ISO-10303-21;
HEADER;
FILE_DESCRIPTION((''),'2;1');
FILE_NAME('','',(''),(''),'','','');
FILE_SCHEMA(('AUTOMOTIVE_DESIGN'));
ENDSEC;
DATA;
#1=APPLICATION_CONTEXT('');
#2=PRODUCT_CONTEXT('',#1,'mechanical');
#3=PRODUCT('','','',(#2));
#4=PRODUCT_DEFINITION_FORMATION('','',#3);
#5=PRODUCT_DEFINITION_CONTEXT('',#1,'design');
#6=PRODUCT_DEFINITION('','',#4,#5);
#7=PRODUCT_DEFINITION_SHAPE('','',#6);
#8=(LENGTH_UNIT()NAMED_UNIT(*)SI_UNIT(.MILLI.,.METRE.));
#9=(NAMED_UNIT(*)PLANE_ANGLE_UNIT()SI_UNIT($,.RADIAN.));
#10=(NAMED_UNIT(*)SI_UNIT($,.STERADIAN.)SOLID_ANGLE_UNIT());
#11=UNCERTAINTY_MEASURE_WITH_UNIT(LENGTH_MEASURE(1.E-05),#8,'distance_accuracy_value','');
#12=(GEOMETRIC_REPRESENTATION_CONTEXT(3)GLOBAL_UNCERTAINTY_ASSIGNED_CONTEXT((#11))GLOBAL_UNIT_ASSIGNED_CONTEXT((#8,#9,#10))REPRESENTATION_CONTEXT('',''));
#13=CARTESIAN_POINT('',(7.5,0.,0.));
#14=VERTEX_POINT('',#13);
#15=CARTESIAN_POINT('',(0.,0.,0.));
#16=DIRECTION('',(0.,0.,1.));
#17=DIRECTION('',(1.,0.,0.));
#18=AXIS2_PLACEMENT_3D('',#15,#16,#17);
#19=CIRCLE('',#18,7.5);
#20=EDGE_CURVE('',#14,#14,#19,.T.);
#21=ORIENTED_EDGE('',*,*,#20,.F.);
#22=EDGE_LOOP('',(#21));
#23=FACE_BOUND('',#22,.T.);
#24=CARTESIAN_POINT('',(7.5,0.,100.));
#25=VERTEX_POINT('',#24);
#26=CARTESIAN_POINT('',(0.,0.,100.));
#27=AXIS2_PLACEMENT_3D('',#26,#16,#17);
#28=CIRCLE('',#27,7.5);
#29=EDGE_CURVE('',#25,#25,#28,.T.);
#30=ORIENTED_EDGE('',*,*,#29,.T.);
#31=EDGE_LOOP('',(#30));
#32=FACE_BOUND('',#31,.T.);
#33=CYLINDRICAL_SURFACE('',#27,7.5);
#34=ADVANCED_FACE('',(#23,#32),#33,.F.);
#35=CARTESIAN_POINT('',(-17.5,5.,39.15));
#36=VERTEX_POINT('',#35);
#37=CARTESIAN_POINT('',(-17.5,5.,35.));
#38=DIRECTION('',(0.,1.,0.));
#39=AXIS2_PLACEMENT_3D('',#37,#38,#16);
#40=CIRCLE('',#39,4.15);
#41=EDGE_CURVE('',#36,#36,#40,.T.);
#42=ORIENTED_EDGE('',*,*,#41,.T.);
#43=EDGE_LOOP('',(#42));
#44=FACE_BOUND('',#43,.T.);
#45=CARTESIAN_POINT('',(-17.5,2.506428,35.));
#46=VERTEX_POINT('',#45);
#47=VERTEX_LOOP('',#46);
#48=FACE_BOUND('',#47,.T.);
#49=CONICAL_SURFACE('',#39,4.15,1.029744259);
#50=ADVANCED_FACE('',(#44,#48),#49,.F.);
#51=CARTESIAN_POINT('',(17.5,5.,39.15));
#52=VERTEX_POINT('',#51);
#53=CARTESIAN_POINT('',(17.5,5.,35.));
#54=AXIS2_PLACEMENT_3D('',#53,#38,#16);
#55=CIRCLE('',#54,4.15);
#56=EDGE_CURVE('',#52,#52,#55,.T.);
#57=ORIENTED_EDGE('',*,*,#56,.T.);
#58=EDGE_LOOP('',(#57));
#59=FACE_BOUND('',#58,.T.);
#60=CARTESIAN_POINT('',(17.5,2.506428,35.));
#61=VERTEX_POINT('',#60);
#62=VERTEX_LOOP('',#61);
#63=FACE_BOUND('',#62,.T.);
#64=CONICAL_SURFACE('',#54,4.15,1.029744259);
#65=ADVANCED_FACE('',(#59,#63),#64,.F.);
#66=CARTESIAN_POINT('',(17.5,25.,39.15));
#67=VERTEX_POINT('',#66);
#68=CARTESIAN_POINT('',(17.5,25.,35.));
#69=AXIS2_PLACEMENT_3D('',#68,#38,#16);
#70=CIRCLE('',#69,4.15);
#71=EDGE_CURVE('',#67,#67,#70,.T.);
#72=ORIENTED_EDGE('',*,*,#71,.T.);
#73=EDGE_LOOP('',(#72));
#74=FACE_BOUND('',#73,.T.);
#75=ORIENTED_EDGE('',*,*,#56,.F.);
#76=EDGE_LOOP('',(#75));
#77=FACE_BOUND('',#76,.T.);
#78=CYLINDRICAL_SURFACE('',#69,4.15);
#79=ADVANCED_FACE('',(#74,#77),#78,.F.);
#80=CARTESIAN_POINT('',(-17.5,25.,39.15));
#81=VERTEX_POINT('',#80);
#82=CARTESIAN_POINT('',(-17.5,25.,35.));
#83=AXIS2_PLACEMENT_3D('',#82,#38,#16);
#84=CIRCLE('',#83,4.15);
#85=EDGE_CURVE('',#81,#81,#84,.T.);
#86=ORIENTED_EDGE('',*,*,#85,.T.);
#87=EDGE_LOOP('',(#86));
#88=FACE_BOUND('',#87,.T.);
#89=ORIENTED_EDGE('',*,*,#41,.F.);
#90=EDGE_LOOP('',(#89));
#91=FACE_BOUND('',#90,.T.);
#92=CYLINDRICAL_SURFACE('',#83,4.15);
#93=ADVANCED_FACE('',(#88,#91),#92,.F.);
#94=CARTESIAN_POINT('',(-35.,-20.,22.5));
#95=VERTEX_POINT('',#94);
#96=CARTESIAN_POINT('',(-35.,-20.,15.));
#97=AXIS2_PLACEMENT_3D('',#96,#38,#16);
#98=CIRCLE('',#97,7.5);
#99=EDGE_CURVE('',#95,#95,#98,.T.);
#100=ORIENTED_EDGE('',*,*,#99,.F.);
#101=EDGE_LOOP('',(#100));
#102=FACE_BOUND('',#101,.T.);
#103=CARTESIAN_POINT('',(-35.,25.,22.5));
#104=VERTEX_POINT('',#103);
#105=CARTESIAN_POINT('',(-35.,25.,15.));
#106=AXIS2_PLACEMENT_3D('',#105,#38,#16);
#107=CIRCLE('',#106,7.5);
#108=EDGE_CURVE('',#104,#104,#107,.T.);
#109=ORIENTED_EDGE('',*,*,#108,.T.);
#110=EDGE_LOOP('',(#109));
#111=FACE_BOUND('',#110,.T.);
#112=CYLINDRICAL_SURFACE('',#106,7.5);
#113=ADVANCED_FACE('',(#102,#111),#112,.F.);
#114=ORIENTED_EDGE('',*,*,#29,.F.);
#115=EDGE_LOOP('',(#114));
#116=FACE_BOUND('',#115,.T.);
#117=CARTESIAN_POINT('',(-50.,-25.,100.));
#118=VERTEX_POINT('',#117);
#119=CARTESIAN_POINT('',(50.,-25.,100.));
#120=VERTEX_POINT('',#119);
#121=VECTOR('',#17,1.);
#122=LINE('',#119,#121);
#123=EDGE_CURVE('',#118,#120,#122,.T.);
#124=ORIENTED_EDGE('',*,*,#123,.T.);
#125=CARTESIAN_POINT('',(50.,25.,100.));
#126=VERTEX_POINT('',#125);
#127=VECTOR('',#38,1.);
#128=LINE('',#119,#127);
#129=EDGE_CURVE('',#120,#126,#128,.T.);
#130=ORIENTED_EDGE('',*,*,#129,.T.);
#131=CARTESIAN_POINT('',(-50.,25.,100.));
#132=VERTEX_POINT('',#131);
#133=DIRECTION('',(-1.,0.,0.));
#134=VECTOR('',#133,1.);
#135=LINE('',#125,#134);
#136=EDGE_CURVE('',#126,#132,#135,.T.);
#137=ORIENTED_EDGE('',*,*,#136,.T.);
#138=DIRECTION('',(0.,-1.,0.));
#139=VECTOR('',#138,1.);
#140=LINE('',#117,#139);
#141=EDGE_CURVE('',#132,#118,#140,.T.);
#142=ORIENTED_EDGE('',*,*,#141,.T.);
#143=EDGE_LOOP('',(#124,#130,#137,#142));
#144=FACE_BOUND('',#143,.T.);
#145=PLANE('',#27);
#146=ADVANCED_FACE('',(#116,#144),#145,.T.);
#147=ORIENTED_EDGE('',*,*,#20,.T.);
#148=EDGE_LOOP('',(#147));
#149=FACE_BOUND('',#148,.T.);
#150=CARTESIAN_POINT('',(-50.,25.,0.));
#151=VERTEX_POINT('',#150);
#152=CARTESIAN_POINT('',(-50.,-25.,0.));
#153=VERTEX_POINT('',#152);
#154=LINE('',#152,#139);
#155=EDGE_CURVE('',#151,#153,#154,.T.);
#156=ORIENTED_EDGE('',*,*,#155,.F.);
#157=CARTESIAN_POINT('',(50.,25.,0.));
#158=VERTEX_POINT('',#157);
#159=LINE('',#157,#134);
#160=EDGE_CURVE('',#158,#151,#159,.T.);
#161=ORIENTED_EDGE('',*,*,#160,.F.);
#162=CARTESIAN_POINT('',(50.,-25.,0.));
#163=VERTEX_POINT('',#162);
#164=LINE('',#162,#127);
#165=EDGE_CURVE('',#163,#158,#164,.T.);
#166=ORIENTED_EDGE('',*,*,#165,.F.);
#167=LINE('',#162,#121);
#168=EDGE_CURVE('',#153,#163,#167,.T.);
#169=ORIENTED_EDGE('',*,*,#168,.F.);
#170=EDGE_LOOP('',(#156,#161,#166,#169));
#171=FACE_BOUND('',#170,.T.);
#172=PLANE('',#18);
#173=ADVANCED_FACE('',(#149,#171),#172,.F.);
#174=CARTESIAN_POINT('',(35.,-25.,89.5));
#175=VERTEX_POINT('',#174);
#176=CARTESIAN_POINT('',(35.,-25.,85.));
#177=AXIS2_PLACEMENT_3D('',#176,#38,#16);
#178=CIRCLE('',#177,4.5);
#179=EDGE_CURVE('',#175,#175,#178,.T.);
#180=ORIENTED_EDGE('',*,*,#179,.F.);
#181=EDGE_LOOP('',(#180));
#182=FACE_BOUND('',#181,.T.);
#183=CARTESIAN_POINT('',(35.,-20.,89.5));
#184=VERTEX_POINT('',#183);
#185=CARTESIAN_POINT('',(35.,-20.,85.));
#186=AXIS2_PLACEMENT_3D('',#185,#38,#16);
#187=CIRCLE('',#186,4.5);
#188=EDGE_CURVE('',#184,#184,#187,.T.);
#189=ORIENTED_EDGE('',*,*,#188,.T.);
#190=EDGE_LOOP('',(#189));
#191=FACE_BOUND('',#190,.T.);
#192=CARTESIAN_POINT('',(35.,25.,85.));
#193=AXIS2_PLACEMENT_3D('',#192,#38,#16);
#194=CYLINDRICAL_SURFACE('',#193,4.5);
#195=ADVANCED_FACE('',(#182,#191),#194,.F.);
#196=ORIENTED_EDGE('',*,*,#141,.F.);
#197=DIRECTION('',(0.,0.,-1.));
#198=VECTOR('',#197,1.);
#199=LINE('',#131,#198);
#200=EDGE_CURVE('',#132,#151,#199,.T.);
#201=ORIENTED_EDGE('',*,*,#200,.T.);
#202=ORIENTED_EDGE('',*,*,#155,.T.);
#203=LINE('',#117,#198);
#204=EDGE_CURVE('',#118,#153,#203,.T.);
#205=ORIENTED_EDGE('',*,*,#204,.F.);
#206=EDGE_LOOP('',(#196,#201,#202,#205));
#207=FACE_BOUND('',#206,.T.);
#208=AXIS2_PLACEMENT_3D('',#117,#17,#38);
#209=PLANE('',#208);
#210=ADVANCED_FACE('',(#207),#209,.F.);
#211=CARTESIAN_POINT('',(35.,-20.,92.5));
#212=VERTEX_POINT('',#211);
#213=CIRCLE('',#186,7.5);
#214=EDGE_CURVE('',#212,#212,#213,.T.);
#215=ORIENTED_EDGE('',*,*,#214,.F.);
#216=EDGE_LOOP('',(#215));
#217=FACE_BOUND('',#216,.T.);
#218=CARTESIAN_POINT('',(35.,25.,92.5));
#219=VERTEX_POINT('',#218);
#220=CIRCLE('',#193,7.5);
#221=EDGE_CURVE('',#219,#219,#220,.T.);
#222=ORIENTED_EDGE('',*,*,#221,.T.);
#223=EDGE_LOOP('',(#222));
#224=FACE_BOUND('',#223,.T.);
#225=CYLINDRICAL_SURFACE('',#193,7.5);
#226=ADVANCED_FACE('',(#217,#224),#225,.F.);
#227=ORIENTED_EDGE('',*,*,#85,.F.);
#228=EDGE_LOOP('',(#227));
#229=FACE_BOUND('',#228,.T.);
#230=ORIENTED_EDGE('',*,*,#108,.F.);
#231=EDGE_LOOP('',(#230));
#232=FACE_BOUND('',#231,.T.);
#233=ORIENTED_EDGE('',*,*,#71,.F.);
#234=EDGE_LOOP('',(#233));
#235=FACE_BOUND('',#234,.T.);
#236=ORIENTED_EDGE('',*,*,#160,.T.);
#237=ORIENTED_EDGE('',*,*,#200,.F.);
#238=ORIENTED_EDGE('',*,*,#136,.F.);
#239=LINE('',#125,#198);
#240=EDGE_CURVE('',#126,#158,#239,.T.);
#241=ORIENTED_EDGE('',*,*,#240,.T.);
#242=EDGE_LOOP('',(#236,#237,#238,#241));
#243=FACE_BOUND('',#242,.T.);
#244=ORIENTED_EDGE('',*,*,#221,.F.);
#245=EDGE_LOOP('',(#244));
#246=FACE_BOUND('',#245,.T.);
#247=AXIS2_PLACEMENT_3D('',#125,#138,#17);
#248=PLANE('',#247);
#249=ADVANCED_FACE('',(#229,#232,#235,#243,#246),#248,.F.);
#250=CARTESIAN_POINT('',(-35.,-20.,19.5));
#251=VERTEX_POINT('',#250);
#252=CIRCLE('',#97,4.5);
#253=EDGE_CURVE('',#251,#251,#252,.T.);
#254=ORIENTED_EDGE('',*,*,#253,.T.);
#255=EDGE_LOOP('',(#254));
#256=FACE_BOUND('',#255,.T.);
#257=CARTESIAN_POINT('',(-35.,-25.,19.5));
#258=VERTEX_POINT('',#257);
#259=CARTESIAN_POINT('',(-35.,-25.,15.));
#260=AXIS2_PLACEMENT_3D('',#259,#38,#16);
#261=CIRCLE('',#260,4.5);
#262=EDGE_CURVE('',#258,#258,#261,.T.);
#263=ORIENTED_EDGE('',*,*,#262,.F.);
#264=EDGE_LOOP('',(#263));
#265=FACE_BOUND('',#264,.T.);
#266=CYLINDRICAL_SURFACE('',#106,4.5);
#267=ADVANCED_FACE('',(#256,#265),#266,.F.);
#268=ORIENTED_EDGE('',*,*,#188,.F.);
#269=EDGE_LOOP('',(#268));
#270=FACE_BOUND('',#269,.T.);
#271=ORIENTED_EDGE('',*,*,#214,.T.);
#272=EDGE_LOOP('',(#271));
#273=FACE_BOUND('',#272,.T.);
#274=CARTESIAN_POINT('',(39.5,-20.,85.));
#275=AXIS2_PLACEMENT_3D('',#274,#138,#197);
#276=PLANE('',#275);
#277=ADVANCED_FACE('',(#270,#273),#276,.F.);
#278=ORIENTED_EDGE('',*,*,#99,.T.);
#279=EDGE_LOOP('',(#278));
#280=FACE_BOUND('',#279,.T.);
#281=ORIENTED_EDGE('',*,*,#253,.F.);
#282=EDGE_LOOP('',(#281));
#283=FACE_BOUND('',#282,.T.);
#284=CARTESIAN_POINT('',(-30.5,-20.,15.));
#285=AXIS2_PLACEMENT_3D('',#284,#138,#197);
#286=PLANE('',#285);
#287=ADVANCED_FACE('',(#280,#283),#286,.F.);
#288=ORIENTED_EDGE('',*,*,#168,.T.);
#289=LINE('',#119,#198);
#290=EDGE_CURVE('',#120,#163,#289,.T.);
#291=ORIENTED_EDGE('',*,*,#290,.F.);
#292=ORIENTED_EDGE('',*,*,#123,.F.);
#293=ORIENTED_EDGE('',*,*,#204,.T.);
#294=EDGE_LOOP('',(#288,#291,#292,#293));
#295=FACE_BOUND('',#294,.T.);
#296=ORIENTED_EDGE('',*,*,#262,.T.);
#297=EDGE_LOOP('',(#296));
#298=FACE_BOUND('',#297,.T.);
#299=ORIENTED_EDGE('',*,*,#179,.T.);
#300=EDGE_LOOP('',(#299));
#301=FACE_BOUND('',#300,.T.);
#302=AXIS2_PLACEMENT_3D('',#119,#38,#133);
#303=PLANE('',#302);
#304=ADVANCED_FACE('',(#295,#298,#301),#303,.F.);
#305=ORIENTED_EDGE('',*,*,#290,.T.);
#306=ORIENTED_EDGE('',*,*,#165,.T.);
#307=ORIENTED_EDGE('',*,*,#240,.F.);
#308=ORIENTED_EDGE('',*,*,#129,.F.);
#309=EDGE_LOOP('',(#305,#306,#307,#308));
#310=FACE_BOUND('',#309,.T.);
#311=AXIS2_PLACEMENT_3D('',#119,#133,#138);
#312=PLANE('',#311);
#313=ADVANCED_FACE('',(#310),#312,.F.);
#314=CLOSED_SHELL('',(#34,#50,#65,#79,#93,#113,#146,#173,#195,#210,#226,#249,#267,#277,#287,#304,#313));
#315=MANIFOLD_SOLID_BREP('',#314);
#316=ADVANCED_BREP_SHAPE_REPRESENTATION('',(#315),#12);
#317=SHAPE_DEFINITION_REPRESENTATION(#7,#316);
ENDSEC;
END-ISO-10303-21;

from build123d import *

# Parameters (mm, degrees)
SKIZZE1_W                                           = 100
SKIZZE1_H                                           = 50
AUFSATZ_LINEAR_AUSTRAGEN1_DEPTH                     = 100
STIRNSENKUNG_F_R_M8_SENKSCHRAUBE_KOPF_B_D           = 9
STIRNSENKUNG_F_R_M8_SENKSCHRAUBE_KOPF_B_CBORE_D     = 15
STIRNSENKUNG_F_R_M8_SENKSCHRAUBE_KOPF_B_CBORE_DEPTH = 45
STIRNSENKUNG_F_R_M8_SENKSCHRAUBE_KO_2_D             = 9
STIRNSENKUNG_F_R_M8_SENKSCHRAUBE_KO_2_CBORE_D       = 15
STIRNSENKUNG_F_R_M8_SENKSCHRAUBE_KO_2_CBORE_DEPTH   = 116


# Read off the part's stored shape, not the designer's step: Kernloch für M8 Helicoil1
with BuildPart() as part:
    # Skizze1 → Aufsatz-Linear austragen1 (new body)
    with BuildSketch(Plane.XY):
        Rectangle(SKIZZE1_W, SKIZZE1_H)
    extrude(amount=AUFSATZ_LINEAR_AUSTRAGEN1_DEPTH)

    # Stirnsenkung f_r M8 Senkschraube _Kopf B (through all)
    with Locations(Plane(origin=(0, 25, 0), x_dir=(1, 0, 0), z_dir=(0, 1, 0))):
        with Locations((35, -85), (-35, -15)):
            CounterBoreHole(STIRNSENKUNG_F_R_M8_SENKSCHRAUBE_KOPF_B_D / 2, STIRNSENKUNG_F_R_M8_SENKSCHRAUBE_KOPF_B_CBORE_D / 2, STIRNSENKUNG_F_R_M8_SENKSCHRAUBE_KOPF_B_CBORE_DEPTH)

    # Stirnsenkung f_r M8 Senkschraube _Ko 2 (through all)
    with Locations(Plane.XY.offset(100)):
        with Locations((0, 0)):
            CounterBoreHole(STIRNSENKUNG_F_R_M8_SENKSCHRAUBE_KO_2_D / 2, STIRNSENKUNG_F_R_M8_SENKSCHRAUBE_KO_2_CBORE_D / 2, STIRNSENKUNG_F_R_M8_SENKSCHRAUBE_KO_2_CBORE_DEPTH)

    # Kernloch für M8 Helicoil1 outline → Kernloch für M8 Helicoil1 (revolve, cut)
    with BuildSketch(Plane(origin=(17.5, 0, 35), x_dir=(1, 0, 0), z_dir=(0, 0, 1))):
        Polygon((0, 25), (0, 2.506428431), (4.15, 5), (4.15, 25), align=None)
    revolve(axis=Axis((17.5, 0, 35), (0, 1, 0)), mode=Mode.SUBTRACT)

    # Kernloch f_r M8 Helicoil1 2 outline → Kernloch f_r M8 Helicoil1 2 (revolve, cut)
    with BuildSketch(Plane(origin=(-17.5, 0, 35), x_dir=(1, 0, 0), z_dir=(0, 0, 1))):
        Polygon((0, 25), (0, 2.506428431), (4.15, 5), (4.15, 25), align=None)
    revolve(axis=Axis((-17.5, 0, 35), (0, 1, 0)), mode=Mode.SUBTRACT)


solid = part.part
